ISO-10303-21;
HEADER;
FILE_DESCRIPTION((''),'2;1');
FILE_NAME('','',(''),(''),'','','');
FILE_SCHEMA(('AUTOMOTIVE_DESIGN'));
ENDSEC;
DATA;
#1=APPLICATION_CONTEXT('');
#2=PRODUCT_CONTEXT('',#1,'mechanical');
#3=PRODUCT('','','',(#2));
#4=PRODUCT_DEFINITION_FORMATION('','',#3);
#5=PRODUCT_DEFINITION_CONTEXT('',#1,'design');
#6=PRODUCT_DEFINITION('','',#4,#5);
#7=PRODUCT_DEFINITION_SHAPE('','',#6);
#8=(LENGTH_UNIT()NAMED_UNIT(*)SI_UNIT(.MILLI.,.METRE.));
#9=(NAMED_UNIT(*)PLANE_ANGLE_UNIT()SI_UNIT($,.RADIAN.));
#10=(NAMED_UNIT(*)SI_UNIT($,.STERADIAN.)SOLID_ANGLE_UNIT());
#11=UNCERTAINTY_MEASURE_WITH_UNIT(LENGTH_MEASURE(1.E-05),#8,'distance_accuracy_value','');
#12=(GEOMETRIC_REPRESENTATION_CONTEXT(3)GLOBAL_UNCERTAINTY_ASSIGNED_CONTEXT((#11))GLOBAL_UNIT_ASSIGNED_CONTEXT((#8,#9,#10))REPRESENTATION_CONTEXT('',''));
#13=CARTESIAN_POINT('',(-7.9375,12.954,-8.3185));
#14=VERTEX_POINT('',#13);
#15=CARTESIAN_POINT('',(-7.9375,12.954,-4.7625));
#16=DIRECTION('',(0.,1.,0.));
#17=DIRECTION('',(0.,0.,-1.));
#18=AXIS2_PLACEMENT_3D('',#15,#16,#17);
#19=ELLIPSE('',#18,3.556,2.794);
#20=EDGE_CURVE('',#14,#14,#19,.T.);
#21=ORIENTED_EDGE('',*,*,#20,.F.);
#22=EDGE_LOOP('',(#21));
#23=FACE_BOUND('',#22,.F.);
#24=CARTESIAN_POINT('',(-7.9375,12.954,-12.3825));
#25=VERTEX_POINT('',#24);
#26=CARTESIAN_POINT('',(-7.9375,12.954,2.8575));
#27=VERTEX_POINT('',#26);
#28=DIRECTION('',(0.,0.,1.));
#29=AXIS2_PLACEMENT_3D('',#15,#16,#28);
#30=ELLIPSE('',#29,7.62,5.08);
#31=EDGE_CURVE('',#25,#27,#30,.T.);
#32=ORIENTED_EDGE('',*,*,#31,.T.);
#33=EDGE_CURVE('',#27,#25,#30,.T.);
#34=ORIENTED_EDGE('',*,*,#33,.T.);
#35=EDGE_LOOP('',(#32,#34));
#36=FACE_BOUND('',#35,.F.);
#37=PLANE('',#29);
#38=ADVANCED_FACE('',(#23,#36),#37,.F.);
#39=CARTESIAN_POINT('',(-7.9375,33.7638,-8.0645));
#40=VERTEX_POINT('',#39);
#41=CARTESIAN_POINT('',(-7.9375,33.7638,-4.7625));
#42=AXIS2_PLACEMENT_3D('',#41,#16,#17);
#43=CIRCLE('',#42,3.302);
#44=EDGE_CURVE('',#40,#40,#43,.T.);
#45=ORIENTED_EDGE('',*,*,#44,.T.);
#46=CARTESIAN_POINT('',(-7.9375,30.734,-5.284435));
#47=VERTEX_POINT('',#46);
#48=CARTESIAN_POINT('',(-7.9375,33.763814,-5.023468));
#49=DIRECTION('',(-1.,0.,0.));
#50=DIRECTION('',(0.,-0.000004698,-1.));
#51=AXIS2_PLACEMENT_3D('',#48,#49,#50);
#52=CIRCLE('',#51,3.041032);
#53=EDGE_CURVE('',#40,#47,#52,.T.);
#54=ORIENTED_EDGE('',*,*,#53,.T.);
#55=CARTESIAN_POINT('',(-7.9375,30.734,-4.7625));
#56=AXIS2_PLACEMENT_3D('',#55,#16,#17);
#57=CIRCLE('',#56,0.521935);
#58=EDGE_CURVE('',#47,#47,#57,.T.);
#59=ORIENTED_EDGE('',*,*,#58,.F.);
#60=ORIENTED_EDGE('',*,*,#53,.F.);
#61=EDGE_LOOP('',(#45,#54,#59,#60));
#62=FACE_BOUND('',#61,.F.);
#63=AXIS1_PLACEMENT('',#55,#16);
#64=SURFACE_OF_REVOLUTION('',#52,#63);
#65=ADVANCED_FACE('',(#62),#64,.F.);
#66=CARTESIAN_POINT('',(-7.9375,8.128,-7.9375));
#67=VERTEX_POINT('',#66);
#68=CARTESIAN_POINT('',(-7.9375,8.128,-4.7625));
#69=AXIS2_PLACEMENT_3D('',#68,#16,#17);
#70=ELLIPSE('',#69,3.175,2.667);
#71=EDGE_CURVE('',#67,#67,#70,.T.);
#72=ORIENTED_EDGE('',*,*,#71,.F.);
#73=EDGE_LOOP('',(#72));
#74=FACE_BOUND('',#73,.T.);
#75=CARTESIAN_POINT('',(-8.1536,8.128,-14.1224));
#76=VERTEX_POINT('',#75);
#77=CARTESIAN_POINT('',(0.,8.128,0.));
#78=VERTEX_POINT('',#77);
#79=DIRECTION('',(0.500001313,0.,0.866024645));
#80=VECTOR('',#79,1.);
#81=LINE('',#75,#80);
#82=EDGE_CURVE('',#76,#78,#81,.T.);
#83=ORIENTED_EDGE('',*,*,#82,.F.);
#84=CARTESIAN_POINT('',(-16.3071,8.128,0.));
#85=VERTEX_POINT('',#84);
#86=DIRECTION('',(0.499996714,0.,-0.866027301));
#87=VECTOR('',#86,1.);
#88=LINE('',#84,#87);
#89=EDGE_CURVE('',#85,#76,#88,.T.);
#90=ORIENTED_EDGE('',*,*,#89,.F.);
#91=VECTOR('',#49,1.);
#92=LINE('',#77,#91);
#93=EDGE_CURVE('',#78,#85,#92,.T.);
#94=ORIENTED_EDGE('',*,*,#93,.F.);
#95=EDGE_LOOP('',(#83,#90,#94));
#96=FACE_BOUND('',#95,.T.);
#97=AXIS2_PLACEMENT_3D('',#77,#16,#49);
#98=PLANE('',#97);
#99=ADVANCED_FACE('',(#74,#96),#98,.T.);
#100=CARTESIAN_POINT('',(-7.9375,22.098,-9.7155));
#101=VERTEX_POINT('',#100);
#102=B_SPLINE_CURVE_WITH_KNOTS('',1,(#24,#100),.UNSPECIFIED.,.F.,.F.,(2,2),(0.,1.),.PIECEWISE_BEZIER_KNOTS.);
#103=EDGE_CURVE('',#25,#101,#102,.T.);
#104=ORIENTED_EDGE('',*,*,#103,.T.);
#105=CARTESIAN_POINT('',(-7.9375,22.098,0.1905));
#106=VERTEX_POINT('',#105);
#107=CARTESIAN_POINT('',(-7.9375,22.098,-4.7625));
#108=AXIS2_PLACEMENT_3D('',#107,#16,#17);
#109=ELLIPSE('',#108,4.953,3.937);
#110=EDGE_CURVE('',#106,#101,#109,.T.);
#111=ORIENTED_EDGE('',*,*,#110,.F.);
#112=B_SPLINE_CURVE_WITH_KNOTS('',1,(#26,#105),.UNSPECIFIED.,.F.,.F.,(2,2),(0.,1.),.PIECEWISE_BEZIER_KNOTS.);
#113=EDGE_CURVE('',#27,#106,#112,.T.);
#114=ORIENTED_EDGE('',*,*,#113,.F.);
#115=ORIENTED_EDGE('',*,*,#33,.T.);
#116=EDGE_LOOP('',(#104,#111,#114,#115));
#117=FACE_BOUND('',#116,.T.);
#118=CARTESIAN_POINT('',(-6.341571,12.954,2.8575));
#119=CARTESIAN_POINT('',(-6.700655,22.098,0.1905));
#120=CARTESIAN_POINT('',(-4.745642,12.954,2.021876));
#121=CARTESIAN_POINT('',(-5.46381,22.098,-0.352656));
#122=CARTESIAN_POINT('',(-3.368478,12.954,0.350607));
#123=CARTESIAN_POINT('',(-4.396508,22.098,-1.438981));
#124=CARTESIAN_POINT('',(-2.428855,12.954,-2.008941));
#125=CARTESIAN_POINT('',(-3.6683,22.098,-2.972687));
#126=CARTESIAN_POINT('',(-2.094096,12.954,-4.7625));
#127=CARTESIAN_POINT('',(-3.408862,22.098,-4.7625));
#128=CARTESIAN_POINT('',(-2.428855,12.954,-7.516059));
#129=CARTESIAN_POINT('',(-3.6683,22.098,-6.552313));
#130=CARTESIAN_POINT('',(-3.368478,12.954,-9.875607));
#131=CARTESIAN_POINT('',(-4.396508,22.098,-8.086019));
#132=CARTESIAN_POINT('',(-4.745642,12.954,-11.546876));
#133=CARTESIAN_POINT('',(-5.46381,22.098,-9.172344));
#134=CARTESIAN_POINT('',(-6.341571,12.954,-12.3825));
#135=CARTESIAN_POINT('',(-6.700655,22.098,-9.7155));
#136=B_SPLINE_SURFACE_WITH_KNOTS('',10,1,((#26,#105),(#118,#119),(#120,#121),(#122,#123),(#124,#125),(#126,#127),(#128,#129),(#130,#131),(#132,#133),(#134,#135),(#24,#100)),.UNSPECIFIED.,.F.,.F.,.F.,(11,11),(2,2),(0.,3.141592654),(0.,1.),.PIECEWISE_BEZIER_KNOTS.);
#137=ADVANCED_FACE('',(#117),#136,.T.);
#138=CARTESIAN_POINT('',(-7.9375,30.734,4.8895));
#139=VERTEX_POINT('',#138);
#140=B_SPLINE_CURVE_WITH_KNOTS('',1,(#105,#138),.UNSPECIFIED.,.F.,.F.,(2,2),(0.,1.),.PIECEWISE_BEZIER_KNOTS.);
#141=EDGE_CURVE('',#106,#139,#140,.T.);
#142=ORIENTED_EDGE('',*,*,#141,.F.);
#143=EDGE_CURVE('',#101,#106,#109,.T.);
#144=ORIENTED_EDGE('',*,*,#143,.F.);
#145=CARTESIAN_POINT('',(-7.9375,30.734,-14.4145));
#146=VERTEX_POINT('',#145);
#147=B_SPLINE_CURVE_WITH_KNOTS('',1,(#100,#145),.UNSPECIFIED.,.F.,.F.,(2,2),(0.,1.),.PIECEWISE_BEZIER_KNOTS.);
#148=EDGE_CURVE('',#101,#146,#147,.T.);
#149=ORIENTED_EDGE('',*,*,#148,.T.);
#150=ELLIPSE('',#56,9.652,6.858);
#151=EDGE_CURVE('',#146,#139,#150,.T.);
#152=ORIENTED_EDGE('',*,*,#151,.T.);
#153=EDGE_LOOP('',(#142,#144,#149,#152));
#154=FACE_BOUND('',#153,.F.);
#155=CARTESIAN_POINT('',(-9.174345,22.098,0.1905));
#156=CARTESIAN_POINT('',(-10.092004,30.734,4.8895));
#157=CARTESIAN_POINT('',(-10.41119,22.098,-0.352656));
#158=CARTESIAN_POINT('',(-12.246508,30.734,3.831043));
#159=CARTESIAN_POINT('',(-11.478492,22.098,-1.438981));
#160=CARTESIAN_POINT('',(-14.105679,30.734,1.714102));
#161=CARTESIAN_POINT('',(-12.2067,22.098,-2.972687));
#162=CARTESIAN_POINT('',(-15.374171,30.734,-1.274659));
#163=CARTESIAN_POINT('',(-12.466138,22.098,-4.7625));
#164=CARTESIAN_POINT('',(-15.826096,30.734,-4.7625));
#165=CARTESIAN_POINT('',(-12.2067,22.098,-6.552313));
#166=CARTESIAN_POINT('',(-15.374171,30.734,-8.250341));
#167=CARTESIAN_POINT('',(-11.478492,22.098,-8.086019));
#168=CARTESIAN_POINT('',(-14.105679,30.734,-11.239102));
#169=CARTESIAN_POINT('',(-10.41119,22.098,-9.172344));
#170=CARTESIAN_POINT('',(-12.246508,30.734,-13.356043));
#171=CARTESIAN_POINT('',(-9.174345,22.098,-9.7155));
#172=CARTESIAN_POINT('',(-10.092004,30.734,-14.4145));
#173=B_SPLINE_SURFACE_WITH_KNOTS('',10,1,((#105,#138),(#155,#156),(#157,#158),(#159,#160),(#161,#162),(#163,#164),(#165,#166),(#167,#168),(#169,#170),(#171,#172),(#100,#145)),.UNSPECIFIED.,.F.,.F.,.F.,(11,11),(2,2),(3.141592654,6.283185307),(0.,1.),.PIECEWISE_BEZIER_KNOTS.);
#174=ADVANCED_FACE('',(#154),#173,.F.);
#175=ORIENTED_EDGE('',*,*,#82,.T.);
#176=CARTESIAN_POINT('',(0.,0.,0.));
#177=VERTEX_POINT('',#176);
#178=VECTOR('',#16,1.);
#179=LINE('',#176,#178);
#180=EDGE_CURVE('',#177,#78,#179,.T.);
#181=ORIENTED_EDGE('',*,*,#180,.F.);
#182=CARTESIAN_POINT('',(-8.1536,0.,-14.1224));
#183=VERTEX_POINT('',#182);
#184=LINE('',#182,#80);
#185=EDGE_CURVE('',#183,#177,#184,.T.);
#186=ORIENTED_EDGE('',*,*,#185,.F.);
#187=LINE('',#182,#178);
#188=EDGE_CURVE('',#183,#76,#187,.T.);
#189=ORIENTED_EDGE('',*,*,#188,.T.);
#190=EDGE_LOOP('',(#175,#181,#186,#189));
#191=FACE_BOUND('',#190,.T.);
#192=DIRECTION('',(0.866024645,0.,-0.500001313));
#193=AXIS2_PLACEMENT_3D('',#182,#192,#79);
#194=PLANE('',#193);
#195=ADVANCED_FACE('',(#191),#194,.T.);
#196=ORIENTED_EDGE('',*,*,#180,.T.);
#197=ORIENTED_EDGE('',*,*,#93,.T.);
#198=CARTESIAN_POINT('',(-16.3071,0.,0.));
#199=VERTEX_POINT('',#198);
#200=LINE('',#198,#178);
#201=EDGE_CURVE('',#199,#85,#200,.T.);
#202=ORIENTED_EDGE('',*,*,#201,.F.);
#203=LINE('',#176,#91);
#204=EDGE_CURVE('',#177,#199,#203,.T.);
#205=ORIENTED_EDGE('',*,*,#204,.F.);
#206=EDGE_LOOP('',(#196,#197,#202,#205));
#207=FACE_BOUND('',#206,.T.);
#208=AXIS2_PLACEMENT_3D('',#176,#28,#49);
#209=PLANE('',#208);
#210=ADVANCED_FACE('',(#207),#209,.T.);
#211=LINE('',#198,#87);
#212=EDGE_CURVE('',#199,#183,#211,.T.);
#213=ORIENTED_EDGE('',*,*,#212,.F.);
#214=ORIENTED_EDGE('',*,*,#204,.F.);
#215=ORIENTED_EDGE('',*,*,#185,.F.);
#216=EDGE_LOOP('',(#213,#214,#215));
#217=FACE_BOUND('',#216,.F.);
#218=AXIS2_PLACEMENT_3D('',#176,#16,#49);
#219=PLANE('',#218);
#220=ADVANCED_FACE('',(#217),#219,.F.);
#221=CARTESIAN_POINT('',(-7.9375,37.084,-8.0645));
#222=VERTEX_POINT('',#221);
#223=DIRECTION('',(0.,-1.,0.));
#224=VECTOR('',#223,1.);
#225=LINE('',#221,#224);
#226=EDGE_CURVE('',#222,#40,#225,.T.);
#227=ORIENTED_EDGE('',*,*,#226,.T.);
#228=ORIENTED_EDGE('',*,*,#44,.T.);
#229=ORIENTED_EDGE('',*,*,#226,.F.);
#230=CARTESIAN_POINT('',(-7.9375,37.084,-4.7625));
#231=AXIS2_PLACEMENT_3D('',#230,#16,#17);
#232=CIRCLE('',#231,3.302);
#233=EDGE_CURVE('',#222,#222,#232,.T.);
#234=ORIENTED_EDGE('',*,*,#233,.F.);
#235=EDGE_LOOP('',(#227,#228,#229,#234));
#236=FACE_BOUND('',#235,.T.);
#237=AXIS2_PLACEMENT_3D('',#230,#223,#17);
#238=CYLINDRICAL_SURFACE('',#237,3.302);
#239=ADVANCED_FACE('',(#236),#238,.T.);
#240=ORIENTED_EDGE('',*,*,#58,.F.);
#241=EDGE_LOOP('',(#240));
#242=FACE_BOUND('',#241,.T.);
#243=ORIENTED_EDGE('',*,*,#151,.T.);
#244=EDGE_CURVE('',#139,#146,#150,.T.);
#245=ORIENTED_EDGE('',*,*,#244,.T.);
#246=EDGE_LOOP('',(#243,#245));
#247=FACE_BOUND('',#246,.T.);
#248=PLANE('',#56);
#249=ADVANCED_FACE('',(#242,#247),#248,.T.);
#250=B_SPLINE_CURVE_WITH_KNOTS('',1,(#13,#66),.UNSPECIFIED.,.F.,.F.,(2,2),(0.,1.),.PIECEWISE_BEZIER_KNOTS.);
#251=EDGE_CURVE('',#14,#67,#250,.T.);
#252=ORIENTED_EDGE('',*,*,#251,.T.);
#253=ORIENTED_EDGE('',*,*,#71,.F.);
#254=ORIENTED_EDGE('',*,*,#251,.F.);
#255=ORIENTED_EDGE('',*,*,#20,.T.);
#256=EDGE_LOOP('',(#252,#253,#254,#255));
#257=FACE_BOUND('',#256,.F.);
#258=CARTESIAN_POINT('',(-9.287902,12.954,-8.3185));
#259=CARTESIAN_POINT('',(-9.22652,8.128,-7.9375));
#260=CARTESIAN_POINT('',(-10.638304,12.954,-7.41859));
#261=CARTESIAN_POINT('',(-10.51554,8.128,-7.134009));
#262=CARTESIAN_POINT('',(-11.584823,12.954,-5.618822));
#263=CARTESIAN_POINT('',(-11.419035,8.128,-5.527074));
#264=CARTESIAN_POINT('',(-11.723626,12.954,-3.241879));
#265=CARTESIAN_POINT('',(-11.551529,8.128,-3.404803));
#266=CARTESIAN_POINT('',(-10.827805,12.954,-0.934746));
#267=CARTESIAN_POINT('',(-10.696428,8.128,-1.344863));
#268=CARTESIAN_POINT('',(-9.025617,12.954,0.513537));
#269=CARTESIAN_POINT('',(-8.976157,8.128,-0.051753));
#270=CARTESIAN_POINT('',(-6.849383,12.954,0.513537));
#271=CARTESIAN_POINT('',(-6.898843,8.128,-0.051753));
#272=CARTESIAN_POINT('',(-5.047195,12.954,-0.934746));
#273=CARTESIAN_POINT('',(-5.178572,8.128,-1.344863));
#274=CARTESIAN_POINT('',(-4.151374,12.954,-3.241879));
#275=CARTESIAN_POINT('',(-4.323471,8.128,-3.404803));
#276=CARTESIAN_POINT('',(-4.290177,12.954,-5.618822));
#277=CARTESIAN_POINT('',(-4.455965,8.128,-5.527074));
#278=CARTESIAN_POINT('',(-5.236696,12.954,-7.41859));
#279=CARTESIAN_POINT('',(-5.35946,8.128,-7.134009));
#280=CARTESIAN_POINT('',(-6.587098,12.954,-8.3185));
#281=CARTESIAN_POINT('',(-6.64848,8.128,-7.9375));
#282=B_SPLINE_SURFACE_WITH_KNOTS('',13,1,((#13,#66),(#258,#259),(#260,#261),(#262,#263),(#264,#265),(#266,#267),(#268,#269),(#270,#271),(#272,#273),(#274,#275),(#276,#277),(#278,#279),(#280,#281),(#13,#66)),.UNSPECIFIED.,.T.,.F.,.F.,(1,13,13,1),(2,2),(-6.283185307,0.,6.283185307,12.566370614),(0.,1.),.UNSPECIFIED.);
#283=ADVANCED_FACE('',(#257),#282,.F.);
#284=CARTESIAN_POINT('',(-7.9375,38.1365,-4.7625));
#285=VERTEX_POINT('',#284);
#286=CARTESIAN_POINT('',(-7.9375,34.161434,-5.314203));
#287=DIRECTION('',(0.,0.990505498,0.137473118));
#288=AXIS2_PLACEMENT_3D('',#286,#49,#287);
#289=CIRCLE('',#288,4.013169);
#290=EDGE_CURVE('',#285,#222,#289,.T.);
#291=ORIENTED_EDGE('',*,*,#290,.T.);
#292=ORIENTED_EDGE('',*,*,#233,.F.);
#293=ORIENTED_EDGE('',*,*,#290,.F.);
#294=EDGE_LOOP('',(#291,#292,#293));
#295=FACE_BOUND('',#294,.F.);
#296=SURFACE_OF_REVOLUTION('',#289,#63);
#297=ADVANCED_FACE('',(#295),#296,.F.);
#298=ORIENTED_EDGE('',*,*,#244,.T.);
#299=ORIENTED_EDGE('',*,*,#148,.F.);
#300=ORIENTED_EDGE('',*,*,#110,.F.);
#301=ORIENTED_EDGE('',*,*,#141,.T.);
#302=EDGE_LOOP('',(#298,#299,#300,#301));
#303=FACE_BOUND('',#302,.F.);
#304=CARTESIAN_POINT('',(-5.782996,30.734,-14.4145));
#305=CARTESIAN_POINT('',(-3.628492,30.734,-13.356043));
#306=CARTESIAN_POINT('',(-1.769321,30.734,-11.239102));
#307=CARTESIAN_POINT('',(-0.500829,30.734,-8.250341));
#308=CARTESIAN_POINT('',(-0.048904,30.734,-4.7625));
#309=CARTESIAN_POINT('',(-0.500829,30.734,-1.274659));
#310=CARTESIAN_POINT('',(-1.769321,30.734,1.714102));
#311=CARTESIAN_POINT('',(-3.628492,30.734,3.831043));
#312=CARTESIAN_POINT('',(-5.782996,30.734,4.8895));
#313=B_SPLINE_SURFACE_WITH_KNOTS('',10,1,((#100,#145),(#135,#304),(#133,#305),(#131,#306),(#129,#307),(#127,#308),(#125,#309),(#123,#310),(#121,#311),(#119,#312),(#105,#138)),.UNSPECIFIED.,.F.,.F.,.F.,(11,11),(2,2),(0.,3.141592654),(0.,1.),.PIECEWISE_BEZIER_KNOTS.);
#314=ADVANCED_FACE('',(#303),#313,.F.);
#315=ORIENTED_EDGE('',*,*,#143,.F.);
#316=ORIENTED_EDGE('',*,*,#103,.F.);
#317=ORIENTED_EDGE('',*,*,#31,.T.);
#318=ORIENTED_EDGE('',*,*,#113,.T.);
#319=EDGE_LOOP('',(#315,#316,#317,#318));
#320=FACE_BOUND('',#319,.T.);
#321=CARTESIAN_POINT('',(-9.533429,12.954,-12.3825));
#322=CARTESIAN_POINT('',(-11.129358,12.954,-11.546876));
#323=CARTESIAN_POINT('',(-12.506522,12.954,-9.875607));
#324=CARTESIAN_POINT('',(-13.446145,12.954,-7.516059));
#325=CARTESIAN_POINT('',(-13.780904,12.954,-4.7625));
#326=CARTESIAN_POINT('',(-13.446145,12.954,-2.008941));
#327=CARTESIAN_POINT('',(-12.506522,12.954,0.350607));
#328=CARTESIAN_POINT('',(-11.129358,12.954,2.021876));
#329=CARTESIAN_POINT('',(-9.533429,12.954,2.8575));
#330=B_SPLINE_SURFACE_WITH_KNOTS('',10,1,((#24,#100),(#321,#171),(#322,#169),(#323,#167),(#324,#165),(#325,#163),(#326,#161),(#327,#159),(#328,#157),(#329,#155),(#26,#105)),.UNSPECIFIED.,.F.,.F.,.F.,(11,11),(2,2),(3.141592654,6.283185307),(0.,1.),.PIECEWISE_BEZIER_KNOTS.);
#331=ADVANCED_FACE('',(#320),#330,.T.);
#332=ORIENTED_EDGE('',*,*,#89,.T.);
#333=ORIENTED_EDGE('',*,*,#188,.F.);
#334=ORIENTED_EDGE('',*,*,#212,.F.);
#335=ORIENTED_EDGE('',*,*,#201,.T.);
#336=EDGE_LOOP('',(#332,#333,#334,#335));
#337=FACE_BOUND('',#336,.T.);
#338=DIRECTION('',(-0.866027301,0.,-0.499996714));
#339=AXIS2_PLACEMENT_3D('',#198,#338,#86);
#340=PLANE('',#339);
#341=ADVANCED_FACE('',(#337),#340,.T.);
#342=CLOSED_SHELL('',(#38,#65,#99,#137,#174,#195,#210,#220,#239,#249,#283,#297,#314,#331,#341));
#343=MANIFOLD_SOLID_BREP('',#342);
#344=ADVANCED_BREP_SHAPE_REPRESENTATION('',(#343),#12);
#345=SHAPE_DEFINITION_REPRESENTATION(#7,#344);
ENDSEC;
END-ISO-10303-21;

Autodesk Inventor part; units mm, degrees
sketch "Sketch1" plane through (0, 0, 0) normal (0, 1, 0) x (-1, 0, 0)
  line L0 (0, 0) -> (16.3071, 0)
  line L1 (16.3071, 0) -> (8.1536, -14.1224)
  line L2 (8.1536, -14.1224) -> (0, 0)
  point P0 (8.1536, 0)
  dimension "d1" = 14.1224
  dimension "d3" = 0
extrude "Extrusion1" add sketch "Sketch1" along normal blind 8.128
sketch "Sketch2" plane through (0, 8.128, 0) normal (0, 1, 0) x (1, 0, 0)
  ellipse E0 centre (-7.9375, 4.7625) end of major axis (-5.2705, 4.7625) minor radius 3.175
  line L0 (-16.3071, 0) -> (0, 0) projected
  line L1 (0, 0) -> (-8.1536, 14.1224) projected
  line L2 (-8.1536, 14.1224) -> (-16.3071, 0) projected
  line L3 (-8.1536, 14.1224) -> (-16.3071, 0) projected
  dimension "d8" = 2.667
  dimension "d9" = 3.175
ref_plane "Work Plane1" through (0, 12.954, 0) normal (0, 1, 0) x (1, 0, 0)
sketch "Sketch3" plane through (0, 12.954, 0) normal (0, 1, 0) x (1, 0, 0)
  ellipse E0 centre (-7.9375, 4.7625) end of major axis (-7.9375, 8.3185) minor radius 2.794
  point P0 (0, 0)
  dimension "d11" = 2.794
  dimension "d12" = 3.556
  dimension "d13" = 0
  dimension "d14" = 0
loft "Loft1" add profiles "Sketch3", "Sketch2" contours all / E0
ref_plane "Work Plane2" through (-7.9375, 22.098, -4.7625) normal (0, 1, 0) x (1, 0, 0)
sketch "Sketch4" plane through (-7.9375, 22.098, -4.7625) normal (0, 1, 0) x (1, 0, 0)
  ellipse E0 centre (0, 0) end of major axis (0, 4.953) minor radius 3.937
  point P0 (7.9375, -4.7625)
  dimension "d20" = 3.937
  dimension "d21" = 4.953
sketch "Sketch5" plane through (-7.9375, 12.954, -4.7625) normal (0, 1, 0) x (1, 0, 0)
  ellipse E0 centre (0, 0) end of major axis (0, -7.62) minor radius 5.08
  point P0 (7.9375, -4.7625)
  dimension "d22" = 5.08
  dimension "d23" = 7.62
loft "Loft2" add profiles "Sketch5", "Sketch4"
ref_plane "Work Plane3" through (-7.9375, 30.734, -4.7625) normal (0, 1, 0) x (1, 0, 0)
sketch "Sketch7" plane through (-7.9375, 30.734, -4.7625) normal (0, 1, 0) x (1, 0, 0)
  ellipse E0 centre (0, 0) end of major axis (0, 9.652) minor radius 6.858
  point P0 (7.9375, -4.7625)
  dimension "d29" = 6.858
  dimension "d30" = 9.652
loft "Loft3" add profiles "Sketch7" section 1 edges at (-4.0005, 22.098, -4.7625) (-11.8745, 22.098, -4.7625)
sketch "Sketch8" plane through (-7.9375, 30.734, -4.7625) normal (0, 1, 0) x (1, 0, 0)
  ellipse E0 centre (0, 0) end of major axis (0, -9.652) minor radius 6.858 projected
  line L0 (0, 9.652) -> (0, -9.652)
  point P0 (7.9375, -4.7625)
ref_plane "Work Plane4" through (-7.9375, 30.734, -14.4145) normal (-1, 0, 0) x (0, 0, 1)
sketch "Sketch9" plane through (-7.9375, 30.734, -14.4145) normal (-1, 0, 0) x (0, 0, 1)
  line L0 (0, 0) -> (19.304, 0) projected
  line L1 (9.652, 0) -> (9.652, 7.4025)
  line L2 (6.35, 6.35) -> (6.35, 3.0298)
  arc A0 (9.652, 7.4025) -> (6.35, 6.35) centre (9.1003, 3.4274) ccw
  arc A1 (6.35, 3.0298) -> (9.652, 0) centre (9.391, 3.0298) ccw
  point P0 (14.4145, -30.734)
revolve "Revolution1" add sketch "Sketch9" angle 360 about axis through (-7.9375, 30.734, -4.7625) along (0, 1, 0)
properties part number "femsle" material "PMMA Plastic"
